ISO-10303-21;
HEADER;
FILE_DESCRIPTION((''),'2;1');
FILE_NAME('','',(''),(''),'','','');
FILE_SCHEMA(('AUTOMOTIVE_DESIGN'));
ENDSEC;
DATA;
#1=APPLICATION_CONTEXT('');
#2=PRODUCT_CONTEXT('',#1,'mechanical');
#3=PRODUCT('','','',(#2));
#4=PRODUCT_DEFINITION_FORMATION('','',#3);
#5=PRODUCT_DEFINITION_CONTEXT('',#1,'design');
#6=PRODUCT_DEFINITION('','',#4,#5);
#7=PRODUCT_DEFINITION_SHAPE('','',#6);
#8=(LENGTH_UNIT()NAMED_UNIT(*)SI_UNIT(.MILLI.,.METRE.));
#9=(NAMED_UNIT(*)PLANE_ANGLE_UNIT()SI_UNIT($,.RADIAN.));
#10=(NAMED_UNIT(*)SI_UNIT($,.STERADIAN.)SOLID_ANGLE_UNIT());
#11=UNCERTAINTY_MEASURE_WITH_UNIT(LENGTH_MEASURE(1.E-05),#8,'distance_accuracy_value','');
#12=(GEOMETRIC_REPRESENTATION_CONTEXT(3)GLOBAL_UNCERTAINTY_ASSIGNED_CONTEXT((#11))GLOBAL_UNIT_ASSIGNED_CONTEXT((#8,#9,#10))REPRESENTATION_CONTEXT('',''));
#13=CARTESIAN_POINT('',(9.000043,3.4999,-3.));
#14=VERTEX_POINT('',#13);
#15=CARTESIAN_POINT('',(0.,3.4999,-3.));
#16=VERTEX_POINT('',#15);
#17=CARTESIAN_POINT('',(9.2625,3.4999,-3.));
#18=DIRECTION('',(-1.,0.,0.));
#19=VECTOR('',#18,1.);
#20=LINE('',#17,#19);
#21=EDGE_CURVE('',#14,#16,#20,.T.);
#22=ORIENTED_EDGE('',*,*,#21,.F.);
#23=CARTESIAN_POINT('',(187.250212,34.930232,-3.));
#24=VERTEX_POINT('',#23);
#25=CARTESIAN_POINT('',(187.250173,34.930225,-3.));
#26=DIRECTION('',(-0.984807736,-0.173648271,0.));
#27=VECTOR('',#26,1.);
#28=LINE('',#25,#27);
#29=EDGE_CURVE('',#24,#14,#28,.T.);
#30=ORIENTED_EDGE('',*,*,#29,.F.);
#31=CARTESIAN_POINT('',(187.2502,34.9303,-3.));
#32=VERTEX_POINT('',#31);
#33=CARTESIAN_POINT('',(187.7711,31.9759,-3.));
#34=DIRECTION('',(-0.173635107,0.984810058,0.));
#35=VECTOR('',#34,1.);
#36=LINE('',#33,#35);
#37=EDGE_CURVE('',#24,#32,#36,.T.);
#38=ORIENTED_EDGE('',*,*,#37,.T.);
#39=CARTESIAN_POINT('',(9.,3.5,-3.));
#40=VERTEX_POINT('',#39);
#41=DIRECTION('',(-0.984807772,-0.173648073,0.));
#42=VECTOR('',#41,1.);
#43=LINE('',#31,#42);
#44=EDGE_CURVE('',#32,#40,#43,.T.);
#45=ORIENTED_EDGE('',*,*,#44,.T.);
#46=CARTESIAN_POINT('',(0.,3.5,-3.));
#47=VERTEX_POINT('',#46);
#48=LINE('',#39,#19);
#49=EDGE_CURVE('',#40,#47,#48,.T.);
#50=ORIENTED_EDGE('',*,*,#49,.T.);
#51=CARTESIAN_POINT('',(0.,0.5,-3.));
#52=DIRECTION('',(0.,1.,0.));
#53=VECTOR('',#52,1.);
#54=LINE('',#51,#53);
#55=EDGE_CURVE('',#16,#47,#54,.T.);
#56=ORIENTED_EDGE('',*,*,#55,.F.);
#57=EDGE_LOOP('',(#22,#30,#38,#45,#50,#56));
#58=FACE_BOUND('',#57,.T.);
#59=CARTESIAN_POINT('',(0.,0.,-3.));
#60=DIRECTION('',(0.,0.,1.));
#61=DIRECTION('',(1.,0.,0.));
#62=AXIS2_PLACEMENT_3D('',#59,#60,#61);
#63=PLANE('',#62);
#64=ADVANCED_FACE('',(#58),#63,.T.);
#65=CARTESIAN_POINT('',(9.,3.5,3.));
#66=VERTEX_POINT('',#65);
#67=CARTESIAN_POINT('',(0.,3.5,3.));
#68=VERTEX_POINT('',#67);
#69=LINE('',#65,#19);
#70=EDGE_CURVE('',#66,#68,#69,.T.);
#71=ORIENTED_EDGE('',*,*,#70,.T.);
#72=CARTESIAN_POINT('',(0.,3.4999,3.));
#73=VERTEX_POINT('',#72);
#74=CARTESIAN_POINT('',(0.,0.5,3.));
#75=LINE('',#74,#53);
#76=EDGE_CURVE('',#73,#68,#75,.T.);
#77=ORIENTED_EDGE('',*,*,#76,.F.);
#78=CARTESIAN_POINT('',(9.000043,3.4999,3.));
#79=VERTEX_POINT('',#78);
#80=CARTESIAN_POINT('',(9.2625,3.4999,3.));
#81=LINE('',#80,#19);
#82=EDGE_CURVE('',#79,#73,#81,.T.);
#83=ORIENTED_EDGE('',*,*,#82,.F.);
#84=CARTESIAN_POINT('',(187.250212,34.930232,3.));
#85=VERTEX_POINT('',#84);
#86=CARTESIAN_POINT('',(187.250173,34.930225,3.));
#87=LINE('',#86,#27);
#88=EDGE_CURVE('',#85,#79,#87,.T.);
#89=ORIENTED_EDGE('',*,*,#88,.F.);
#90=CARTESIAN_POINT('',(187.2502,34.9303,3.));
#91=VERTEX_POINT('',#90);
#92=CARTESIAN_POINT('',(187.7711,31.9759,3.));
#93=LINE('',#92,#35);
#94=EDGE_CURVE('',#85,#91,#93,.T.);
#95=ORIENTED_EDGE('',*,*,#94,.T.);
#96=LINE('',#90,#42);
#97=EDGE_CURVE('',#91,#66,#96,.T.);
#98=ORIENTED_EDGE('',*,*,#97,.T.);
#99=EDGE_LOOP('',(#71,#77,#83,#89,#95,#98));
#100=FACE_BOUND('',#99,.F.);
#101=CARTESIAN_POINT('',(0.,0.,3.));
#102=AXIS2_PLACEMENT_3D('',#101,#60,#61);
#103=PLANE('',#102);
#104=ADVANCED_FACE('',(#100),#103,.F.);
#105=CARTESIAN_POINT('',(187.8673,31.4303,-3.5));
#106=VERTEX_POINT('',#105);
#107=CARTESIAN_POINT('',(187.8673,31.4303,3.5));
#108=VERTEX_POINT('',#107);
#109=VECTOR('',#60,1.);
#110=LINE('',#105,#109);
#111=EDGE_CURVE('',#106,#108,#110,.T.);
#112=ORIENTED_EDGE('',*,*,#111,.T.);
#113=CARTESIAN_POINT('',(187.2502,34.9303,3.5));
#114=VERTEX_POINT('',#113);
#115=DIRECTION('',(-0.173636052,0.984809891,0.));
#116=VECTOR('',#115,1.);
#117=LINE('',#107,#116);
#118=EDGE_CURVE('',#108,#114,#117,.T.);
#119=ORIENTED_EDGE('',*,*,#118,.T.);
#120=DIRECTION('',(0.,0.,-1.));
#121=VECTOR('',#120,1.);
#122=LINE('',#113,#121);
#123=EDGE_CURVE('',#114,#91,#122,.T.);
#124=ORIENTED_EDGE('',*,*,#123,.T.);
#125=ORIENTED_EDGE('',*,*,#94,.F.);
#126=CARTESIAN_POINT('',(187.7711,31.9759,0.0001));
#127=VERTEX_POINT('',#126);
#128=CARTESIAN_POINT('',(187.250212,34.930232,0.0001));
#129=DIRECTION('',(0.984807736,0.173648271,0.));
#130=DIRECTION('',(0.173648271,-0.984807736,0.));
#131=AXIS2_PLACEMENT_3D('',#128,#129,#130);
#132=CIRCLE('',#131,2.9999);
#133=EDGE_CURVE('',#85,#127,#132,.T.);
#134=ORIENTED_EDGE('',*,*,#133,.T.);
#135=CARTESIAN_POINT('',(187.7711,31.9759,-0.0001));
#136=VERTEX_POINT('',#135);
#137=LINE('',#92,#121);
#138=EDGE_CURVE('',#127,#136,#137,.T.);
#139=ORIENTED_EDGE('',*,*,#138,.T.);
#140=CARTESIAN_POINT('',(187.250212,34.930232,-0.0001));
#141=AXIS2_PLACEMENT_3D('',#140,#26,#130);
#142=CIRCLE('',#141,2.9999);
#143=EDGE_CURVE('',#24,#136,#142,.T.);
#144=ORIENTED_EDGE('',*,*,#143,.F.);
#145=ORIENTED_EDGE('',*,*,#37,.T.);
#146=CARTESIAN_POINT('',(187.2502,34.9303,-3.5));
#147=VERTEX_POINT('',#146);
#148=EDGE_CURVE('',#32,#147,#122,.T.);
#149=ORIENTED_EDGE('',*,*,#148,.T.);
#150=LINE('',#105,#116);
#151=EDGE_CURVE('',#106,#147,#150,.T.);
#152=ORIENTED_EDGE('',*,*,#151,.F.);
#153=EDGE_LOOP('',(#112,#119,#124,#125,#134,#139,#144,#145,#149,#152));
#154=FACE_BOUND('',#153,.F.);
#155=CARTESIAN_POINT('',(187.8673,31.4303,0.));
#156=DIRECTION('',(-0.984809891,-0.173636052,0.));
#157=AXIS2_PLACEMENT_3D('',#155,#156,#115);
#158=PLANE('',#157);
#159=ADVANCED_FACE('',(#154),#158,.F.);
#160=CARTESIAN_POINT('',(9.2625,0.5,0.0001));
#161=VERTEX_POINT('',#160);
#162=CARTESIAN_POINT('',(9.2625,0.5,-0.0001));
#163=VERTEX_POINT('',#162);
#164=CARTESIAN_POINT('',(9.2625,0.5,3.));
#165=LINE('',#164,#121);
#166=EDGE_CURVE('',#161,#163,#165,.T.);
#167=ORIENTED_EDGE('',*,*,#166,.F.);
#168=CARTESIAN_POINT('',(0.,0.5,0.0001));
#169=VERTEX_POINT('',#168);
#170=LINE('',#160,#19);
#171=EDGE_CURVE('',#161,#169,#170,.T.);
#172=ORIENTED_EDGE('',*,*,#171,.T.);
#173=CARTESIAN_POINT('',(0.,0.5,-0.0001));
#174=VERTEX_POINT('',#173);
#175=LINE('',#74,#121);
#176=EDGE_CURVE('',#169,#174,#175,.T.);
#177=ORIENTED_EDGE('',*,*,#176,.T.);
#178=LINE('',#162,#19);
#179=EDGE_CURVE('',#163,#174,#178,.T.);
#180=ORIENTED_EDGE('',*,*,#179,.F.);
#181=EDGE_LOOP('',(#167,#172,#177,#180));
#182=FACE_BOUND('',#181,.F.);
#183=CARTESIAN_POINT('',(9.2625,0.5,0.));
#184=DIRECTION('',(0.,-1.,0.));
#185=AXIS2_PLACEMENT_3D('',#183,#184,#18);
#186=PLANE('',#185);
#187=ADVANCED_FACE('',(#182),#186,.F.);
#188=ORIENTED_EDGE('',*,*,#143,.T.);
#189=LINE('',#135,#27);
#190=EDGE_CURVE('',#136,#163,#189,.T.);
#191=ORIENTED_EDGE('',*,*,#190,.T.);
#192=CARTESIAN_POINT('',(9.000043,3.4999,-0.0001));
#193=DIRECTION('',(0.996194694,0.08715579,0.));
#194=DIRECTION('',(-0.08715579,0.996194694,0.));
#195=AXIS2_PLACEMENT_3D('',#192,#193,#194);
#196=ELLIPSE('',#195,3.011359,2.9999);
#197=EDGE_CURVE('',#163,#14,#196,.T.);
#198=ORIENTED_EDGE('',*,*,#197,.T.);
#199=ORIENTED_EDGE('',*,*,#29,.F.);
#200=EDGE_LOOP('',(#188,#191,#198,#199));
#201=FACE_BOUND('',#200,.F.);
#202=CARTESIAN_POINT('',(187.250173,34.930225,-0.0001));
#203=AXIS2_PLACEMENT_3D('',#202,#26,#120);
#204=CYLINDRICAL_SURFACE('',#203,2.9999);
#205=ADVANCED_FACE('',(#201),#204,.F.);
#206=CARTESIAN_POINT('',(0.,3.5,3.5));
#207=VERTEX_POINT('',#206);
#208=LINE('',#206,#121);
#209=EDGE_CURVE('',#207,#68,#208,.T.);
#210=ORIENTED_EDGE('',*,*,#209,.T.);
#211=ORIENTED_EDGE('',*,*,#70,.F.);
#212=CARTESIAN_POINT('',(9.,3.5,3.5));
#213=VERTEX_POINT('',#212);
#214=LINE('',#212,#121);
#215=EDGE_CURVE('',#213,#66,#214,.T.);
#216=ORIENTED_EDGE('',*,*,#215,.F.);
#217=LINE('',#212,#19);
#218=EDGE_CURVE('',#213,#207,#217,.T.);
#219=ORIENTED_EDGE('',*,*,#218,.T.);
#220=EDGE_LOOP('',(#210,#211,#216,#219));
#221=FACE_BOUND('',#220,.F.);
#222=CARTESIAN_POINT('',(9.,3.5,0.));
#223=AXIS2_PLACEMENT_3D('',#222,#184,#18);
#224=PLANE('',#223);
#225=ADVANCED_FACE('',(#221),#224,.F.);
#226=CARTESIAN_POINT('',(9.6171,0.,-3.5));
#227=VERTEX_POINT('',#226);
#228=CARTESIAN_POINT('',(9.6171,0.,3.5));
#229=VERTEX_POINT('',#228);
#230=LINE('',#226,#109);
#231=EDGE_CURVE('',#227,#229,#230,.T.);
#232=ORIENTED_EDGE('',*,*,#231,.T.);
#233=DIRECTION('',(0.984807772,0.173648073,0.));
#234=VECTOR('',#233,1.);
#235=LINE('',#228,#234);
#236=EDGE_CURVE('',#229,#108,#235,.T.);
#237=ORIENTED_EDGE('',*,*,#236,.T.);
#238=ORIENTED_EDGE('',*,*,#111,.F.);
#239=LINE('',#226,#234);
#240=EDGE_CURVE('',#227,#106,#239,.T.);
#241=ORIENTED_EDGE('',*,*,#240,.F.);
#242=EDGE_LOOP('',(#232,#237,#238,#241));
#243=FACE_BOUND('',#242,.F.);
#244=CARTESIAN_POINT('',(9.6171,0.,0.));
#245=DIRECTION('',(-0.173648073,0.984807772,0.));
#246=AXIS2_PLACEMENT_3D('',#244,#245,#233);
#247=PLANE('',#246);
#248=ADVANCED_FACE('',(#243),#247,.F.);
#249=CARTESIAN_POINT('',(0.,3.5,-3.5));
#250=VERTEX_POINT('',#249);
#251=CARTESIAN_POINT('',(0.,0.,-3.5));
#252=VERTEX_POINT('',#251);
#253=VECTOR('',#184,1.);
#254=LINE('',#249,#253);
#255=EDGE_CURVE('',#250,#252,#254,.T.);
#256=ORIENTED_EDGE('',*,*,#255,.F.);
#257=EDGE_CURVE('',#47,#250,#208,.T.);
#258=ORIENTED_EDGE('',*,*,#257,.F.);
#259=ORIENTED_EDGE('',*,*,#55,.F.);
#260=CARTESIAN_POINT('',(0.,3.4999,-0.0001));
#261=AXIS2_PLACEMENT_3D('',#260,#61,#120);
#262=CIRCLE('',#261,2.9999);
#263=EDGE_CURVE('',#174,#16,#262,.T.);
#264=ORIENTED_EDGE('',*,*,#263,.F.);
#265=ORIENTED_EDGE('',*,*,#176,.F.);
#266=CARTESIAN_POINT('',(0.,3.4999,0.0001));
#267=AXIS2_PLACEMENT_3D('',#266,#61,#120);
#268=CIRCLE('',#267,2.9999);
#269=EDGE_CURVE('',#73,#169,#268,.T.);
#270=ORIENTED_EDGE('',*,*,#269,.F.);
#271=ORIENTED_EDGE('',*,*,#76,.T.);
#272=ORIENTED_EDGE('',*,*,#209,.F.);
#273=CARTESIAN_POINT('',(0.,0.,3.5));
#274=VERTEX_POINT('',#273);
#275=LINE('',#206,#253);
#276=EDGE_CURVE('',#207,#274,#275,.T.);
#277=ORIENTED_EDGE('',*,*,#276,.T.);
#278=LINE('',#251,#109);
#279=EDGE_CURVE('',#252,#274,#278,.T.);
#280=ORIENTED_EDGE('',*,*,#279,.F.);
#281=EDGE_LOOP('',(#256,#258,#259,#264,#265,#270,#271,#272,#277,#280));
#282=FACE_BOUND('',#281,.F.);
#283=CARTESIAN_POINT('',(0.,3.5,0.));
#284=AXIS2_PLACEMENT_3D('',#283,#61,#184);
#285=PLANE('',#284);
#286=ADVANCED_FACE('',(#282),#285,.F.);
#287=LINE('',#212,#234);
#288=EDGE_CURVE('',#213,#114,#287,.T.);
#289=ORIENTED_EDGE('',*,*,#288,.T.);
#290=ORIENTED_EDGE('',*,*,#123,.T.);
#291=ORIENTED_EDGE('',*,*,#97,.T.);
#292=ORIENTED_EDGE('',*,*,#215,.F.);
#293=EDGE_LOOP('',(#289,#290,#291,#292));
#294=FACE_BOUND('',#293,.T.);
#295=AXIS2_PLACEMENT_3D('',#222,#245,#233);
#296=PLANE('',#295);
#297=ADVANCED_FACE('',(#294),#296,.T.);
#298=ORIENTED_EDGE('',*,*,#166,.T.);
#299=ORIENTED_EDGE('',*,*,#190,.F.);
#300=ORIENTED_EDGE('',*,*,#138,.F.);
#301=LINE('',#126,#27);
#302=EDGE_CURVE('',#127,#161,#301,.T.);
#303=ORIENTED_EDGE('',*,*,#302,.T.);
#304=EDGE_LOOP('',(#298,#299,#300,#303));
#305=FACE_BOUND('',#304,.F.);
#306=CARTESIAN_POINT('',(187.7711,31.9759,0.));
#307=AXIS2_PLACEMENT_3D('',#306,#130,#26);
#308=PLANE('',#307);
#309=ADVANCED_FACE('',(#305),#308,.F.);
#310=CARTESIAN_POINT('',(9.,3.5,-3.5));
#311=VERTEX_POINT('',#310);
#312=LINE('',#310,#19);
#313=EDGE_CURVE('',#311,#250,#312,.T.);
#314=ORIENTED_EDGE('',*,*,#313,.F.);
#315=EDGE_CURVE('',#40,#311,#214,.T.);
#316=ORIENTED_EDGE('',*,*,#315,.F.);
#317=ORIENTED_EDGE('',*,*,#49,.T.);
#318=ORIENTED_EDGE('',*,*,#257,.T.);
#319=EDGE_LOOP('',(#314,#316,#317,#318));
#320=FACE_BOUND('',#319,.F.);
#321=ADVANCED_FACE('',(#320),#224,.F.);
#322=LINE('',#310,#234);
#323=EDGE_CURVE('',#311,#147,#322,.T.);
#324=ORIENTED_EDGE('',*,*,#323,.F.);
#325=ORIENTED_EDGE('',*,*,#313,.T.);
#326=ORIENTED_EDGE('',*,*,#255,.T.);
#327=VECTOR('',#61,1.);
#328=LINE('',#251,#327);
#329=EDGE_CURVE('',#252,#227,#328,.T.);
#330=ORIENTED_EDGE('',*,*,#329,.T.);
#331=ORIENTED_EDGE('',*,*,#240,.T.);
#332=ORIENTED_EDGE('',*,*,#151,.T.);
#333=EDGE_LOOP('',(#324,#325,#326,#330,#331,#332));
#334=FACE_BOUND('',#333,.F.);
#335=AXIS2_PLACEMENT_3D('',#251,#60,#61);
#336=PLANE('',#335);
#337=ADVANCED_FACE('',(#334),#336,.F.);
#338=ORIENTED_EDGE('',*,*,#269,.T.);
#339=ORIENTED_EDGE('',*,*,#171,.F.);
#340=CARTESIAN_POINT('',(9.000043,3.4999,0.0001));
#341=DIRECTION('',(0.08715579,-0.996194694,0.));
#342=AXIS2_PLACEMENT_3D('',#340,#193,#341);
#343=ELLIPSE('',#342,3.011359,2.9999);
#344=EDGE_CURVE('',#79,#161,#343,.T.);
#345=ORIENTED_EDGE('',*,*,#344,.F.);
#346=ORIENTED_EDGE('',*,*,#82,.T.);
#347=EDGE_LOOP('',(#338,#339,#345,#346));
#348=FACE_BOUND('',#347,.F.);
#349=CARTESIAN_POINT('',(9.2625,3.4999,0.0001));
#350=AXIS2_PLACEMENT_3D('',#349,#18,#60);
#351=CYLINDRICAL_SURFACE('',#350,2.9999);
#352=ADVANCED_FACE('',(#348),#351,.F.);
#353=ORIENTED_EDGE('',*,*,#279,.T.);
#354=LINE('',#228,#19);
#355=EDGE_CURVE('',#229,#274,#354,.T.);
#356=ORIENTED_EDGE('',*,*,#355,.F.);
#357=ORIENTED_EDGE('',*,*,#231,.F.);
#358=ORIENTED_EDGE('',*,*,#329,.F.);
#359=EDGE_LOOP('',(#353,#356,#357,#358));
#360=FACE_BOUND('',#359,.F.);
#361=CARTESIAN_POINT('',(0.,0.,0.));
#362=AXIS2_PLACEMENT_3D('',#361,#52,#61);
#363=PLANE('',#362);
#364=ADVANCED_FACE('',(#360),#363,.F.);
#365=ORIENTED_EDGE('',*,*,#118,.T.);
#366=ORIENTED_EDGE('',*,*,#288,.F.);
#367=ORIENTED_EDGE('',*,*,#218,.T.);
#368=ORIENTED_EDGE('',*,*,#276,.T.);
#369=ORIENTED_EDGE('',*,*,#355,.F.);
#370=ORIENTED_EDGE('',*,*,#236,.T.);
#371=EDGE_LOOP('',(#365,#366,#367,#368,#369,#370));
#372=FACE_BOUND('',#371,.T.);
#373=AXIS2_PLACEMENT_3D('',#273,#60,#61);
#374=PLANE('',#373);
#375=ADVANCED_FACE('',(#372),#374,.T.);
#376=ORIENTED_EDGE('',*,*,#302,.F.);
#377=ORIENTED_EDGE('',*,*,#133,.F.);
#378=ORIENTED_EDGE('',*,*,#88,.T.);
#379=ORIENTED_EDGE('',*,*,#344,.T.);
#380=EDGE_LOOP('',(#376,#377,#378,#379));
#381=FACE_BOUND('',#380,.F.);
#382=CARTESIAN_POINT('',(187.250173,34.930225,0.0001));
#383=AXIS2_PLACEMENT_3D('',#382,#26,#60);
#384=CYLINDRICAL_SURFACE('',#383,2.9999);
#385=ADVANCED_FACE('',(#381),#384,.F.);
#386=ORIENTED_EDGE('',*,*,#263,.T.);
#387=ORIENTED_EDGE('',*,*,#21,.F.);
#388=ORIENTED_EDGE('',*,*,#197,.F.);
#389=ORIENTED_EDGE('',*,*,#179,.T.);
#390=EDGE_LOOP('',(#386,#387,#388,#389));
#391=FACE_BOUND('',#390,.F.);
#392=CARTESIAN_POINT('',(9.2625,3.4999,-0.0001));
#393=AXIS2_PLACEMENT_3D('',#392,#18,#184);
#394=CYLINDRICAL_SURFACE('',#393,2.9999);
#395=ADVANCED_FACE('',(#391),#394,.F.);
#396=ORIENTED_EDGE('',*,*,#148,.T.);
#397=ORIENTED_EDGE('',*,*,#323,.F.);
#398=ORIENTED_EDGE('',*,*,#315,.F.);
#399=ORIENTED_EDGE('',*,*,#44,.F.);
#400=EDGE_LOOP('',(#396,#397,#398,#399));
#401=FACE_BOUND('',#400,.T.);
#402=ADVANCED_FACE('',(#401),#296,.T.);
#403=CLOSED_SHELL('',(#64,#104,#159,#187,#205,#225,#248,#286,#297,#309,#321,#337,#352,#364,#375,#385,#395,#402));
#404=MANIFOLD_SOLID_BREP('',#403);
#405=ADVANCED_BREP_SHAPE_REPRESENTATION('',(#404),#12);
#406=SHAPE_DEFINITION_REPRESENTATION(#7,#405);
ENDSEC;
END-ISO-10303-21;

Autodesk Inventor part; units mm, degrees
ref_plane "YZ Plane" through (0, 0, 0) normal (1, 0, 0) x (0, 1, 0)
ref_plane "XZ Plane" through (0, 0, 0) normal (0, 1, 0) x (-1, 0, 0)
ref_plane "XY Plane" through (0, 0, 0) normal (0, 0, 1) x (1, 0, 0)
sketch "Esboço1" plane through (0, 0, 0) normal (0, 0, 1) x (1, 0, 0)
  line L0 (0, 0) -> (9, 0)
  line L1 (9, 0) -> (9, 3.5)
  line L2 (9, 3.5) -> (0, 3.5)
  line L3 (0, 3.5) -> (0, 0)
  line L4 (9, 3.5) -> (9.6171, 0)
  line L5 (9.6171, 0) -> (9, 0)
  line L6 (9.6171, 0) -> (187.8673, 31.4303)
  line L7 (9, 3.5) -> (187.2502, 34.9303)
  line L8 (187.8673, 31.4303) -> (187.2502, 34.9303)
  point P0 (0, 1.75)
  point P1 (4.5, 0)
  dimension "d0" = 3.5
  dimension "d1" = 10
  dimension "d2" = 181
  dimension "d17" = 9
extrude "Extrusão1" add sketch "Esboço1" along normal mid plane 7
sketch "Esboço4" plane through (0, 0, 0) normal (0, 0, 1) x (1, 0, 0)
  line L0 (187.2502, 34.9303) -> (9, 3.5) projected
  line L1 (9, 3.5) -> (0, 3.5) projected
  line L2 (187.7711, 31.9759) -> (9.2625, 0.5)
  line L3 (9.2625, 0.5) -> (0, 0.5)
  line L4 (187.7711, 31.9759) -> (187.2502, 34.9303)
  line L5 (0, 0.5) -> (0, 3.5)
  point P0 (0, 0)
  dimension "d13" = 3
extrude "Extrusão4" cut sketch "Esboço4" along normal mid plane 6
fillet "Arredondamento1" radius 3 4 edges at (98.5168, 16.2379, 3) (4.6312, 0.5, 3) (4.6312, 0.5, -3) (98.5168, 16.2379, -3)
properties part number "Inverter sentido bolinha"
